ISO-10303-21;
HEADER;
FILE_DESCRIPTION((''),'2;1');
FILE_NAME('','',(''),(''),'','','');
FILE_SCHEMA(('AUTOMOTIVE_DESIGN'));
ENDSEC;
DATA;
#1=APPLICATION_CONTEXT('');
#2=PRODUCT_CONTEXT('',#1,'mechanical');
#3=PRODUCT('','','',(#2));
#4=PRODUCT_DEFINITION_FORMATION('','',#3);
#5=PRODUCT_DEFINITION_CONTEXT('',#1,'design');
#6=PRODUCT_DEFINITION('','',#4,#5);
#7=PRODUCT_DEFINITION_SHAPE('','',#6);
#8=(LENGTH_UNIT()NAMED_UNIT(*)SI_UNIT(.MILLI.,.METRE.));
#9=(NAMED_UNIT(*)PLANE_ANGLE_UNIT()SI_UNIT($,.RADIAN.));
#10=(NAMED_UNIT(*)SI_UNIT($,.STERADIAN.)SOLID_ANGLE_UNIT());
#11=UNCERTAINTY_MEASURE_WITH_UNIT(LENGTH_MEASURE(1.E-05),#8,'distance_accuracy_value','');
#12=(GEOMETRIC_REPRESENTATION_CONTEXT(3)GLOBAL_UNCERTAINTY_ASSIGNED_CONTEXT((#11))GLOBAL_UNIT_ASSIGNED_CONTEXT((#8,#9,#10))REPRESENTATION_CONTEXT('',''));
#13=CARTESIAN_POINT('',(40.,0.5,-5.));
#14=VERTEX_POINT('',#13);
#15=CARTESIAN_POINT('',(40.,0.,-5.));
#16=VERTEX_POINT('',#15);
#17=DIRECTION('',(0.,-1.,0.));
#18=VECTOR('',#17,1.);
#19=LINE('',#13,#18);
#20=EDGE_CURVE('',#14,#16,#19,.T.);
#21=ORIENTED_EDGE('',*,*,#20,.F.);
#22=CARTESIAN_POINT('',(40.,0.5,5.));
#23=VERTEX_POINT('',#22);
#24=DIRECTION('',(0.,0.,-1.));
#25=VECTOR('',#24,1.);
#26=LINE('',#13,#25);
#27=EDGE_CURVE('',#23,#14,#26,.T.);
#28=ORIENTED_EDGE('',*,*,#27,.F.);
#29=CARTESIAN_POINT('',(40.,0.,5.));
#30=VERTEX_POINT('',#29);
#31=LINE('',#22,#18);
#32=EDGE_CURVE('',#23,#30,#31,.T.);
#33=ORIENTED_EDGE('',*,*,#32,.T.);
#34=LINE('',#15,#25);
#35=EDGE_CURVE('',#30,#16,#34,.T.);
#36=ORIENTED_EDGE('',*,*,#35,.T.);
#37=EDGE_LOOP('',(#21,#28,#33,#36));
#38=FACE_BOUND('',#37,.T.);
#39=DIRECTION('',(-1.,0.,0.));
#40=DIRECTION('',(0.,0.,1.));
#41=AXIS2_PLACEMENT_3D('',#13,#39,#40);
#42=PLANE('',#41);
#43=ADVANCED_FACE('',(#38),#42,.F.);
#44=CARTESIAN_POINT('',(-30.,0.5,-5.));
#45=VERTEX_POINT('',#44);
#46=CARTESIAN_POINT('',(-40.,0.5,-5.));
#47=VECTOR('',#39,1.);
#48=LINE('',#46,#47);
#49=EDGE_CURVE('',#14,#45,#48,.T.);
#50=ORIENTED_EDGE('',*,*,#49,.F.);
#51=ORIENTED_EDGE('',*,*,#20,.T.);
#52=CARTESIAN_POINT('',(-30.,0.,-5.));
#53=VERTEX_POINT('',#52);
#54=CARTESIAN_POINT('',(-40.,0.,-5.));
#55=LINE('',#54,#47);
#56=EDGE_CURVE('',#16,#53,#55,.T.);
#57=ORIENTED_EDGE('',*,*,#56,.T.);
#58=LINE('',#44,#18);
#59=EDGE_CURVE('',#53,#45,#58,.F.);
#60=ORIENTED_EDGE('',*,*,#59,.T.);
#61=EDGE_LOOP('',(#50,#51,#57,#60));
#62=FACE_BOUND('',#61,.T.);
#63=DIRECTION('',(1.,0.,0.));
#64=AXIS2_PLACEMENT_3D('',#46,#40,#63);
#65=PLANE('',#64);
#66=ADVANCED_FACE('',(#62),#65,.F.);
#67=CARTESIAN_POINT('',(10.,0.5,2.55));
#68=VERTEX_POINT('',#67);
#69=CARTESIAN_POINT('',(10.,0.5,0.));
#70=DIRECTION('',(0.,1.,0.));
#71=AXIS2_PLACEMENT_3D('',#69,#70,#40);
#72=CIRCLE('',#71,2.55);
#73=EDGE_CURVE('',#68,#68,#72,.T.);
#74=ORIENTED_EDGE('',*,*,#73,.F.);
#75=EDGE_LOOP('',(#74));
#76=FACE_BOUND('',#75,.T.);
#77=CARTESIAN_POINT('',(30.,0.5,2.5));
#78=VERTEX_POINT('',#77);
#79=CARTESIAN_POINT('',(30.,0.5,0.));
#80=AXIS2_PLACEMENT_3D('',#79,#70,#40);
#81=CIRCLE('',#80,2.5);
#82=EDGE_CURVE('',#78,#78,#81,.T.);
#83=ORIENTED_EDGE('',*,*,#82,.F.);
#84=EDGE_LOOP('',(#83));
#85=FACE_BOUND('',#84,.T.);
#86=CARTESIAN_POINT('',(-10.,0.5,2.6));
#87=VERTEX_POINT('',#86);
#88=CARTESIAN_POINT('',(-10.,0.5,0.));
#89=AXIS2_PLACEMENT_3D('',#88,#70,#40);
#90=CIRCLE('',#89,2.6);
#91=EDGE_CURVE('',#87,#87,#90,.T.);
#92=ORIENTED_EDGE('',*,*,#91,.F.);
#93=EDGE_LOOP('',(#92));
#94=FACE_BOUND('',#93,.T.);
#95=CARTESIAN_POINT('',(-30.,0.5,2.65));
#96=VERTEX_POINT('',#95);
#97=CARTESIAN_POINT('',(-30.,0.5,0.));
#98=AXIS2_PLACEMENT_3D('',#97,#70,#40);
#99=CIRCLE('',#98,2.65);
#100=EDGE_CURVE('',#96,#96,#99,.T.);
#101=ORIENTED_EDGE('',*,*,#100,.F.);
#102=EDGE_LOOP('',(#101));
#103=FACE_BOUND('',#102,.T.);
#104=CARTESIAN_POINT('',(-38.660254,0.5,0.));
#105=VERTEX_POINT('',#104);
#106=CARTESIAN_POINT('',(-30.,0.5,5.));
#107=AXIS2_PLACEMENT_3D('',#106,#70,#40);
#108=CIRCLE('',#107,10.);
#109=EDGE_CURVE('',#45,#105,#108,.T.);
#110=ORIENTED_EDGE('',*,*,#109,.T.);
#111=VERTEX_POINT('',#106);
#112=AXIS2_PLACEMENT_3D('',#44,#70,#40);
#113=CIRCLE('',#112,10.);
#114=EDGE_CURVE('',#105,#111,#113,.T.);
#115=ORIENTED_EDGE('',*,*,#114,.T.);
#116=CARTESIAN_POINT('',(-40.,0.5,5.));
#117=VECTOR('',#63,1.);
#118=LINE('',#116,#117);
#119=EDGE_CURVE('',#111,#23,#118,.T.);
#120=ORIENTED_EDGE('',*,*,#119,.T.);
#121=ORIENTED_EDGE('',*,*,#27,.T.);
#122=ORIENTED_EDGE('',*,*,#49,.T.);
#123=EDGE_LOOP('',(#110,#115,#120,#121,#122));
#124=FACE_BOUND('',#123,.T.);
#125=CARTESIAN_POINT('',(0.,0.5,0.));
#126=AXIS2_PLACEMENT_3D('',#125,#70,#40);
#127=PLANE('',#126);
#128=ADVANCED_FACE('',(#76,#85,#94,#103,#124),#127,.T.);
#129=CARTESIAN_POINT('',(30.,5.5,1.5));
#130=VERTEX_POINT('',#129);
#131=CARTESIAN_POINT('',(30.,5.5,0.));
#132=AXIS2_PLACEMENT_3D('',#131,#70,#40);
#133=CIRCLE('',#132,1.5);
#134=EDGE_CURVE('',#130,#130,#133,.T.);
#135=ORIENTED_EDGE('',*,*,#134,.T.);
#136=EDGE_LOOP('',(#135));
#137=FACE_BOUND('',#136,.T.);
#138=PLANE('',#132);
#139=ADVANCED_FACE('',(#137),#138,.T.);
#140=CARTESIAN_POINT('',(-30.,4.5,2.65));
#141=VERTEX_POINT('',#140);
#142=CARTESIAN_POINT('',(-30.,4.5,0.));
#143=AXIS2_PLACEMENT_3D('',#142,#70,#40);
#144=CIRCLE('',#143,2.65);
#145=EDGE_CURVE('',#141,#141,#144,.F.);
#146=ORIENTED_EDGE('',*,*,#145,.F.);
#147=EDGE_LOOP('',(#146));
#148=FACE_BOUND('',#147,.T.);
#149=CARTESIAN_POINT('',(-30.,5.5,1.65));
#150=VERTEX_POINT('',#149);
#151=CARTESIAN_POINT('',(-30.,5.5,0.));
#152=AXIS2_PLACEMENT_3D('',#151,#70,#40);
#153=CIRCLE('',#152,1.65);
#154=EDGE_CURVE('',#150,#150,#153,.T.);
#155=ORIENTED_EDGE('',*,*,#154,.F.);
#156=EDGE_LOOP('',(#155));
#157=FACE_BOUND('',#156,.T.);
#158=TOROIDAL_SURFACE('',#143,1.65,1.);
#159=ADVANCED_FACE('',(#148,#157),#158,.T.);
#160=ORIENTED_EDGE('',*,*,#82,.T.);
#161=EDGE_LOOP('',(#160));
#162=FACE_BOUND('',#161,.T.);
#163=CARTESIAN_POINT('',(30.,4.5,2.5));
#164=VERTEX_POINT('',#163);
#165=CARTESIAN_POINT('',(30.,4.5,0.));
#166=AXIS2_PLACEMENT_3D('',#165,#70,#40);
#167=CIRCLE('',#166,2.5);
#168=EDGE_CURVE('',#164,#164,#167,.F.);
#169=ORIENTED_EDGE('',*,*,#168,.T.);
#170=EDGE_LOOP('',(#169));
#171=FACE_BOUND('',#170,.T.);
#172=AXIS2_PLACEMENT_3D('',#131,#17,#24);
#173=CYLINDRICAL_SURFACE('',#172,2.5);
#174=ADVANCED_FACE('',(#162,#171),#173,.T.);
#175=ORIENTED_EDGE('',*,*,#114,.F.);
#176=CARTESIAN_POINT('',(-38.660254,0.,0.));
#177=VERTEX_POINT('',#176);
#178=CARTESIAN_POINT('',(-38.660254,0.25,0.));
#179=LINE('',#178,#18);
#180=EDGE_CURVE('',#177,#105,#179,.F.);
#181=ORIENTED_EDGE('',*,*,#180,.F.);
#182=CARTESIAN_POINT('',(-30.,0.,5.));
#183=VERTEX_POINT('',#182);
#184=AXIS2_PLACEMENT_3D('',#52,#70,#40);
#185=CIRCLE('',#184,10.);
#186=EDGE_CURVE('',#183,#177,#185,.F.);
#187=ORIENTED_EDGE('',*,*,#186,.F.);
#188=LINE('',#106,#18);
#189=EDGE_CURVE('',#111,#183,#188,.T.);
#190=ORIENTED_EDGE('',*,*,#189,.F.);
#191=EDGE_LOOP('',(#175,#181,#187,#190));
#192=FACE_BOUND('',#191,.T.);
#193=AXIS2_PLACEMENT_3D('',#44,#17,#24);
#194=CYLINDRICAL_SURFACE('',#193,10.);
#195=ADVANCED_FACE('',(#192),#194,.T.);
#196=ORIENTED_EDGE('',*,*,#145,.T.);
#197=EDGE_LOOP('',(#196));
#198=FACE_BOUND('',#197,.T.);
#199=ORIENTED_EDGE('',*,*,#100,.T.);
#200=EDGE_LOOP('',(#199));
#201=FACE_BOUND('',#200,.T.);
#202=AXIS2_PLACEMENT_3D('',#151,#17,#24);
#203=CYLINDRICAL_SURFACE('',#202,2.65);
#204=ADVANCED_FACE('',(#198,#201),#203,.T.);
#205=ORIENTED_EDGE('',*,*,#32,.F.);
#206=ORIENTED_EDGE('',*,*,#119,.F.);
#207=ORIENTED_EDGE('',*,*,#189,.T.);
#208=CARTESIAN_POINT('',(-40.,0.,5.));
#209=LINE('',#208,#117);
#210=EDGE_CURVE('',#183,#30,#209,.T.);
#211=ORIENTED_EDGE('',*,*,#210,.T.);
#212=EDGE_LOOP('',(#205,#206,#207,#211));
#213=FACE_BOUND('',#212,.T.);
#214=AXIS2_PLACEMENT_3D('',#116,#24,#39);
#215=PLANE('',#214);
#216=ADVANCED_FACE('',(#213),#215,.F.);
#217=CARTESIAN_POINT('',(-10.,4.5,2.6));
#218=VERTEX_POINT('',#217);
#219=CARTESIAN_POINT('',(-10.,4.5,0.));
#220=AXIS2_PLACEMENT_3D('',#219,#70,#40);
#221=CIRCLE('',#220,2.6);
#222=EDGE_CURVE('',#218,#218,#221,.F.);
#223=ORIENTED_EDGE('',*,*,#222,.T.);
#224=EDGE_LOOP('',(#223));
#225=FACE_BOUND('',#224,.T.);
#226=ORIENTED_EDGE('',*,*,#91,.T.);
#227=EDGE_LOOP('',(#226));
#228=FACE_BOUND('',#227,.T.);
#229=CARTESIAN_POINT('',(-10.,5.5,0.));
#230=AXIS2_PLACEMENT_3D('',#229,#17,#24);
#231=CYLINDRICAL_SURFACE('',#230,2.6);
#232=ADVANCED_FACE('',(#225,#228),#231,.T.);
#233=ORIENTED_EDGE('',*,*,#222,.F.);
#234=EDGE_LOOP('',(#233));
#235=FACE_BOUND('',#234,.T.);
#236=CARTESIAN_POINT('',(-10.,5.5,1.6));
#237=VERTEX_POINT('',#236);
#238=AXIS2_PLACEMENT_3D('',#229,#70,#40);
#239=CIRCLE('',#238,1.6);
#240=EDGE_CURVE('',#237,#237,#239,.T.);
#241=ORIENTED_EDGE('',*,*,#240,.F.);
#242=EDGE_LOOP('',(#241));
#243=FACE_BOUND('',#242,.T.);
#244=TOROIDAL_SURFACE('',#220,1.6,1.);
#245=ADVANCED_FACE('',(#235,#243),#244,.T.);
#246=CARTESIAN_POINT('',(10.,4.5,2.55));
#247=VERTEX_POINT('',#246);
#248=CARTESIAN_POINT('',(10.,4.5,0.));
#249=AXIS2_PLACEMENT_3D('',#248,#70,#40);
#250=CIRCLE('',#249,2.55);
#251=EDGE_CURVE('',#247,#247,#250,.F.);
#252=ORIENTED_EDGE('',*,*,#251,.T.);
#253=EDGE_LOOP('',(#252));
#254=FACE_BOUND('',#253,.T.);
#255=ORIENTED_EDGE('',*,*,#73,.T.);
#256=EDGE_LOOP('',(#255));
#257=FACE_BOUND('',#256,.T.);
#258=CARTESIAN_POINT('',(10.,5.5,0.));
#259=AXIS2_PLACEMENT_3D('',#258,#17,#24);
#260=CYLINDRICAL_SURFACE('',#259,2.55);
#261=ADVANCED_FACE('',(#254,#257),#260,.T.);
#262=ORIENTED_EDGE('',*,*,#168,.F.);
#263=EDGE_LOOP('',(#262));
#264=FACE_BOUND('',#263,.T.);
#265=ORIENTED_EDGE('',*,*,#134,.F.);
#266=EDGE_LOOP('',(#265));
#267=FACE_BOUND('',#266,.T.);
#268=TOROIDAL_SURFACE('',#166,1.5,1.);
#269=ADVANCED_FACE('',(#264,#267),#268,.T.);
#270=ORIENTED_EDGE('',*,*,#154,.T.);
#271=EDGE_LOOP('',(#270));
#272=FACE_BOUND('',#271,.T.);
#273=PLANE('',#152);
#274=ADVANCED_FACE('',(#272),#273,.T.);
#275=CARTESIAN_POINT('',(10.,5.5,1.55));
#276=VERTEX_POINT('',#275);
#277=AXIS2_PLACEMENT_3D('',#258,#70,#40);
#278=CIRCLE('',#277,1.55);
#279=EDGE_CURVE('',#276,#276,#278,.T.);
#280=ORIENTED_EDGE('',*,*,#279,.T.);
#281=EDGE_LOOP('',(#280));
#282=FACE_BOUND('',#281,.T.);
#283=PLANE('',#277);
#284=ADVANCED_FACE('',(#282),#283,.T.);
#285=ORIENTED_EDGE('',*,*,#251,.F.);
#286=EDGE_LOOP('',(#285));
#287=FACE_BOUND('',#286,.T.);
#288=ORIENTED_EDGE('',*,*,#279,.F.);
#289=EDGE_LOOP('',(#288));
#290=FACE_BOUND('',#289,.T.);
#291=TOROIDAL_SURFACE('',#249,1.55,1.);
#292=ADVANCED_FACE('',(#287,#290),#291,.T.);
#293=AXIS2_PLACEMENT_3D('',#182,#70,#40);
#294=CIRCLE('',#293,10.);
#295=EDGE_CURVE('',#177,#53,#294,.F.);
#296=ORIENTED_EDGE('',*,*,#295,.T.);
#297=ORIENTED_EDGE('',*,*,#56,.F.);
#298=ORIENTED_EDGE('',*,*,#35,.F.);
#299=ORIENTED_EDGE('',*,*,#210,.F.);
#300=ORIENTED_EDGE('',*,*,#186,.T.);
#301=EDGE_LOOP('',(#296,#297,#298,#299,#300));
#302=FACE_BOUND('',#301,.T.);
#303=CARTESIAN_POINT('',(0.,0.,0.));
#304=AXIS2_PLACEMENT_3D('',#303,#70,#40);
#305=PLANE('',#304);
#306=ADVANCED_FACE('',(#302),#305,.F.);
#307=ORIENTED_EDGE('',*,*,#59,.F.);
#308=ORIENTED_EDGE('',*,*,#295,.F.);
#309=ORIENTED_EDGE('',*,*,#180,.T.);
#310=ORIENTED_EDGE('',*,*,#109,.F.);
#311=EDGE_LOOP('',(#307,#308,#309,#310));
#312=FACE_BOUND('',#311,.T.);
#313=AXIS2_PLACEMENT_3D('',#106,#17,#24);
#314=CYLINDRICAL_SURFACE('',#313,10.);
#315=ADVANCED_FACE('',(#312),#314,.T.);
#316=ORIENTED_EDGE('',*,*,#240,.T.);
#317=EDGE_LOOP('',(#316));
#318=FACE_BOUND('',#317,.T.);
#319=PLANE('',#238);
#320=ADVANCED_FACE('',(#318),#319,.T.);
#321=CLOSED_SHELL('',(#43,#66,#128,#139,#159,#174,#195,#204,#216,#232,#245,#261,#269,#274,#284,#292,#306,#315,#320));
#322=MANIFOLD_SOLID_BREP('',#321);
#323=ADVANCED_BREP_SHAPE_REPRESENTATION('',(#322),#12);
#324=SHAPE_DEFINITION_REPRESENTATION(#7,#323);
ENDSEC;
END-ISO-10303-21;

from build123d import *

# Parameters (mm, degrees)
SKETCH2_W           = 80
SKETCH2_H           = 10
BOSS_EXTRUDE1_DEPTH = 0.5
SKETCH3_R           = 2.65
SKETCH3_R_2         = 2.6
SKETCH3_R_3         = 2.55
SKETCH3_R_4         = 2.5
BOSS_EXTRUDE2_DEPTH = 5
FILLET1_R           = 1
FILLET2_R           = 10


with BuildPart() as part:
    # Sketch2 → Boss-Extrude1 (new body)
    with BuildSketch(Plane(origin=(0, 0, 0), x_dir=(1, 0, 0), z_dir=(0, 1, 0))):
        Rectangle(SKETCH2_W, SKETCH2_H)
    extrude(amount=BOSS_EXTRUDE1_DEPTH)

    # Sketch3 → Boss-Extrude2 (add)
    with BuildSketch(Plane(origin=(0, 0.5, 0), x_dir=(1, 0, 0), z_dir=(0, 1, 0))):
        with Locations(Location((-30, 0, 0), (0, 0, 270))):
            Circle(SKETCH3_R)
        with Locations(Location((-10, 0, 0), (0, 0, 270))):
            Circle(SKETCH3_R_2)
        with Locations(Location((10, 0, 0), (0, 0, 270))):
            Circle(SKETCH3_R_3)
        with Locations(Location((30, 0, 0), (0, 0, 270))):
            Circle(SKETCH3_R_4)
    extrude(amount=BOSS_EXTRUDE2_DEPTH)

    # Fillet1
    fillet1_edges = [part.edges().sort_by_distance(p)[0] for p in [
        (-30, 5.5, -2.65),
        (-10, 5.5, -2.6),
        (10, 5.5, -2.55),
        (30, 5.5, -2.5),
    ]]
    fillet(fillet1_edges, radius=FILLET1_R)

    # Fillet2
    # the kernel refuses this fillet: 10 mm, written as the material it takes off along each edge
    with BuildSketch(Plane(origin=(-40, -25, -5), x_dir=(1, 0, 0), z_dir=(0, 1, 0)), Plane(origin=(-40, -25, 5), x_dir=(0, 0, -1), z_dir=(0, 1, 0))) as fillet2_piece_1:
        with BuildLine():
            CenterArc((FILLET2_R, -FILLET2_R), FILLET2_R, 90, 90)
            Line((0, -FILLET2_R), (0, 0))
            Line((0, 0), (FILLET2_R, 0))
        make_face()
    extrude(amount=50.5, mode=Mode.SUBTRACT)


solid = part.part
